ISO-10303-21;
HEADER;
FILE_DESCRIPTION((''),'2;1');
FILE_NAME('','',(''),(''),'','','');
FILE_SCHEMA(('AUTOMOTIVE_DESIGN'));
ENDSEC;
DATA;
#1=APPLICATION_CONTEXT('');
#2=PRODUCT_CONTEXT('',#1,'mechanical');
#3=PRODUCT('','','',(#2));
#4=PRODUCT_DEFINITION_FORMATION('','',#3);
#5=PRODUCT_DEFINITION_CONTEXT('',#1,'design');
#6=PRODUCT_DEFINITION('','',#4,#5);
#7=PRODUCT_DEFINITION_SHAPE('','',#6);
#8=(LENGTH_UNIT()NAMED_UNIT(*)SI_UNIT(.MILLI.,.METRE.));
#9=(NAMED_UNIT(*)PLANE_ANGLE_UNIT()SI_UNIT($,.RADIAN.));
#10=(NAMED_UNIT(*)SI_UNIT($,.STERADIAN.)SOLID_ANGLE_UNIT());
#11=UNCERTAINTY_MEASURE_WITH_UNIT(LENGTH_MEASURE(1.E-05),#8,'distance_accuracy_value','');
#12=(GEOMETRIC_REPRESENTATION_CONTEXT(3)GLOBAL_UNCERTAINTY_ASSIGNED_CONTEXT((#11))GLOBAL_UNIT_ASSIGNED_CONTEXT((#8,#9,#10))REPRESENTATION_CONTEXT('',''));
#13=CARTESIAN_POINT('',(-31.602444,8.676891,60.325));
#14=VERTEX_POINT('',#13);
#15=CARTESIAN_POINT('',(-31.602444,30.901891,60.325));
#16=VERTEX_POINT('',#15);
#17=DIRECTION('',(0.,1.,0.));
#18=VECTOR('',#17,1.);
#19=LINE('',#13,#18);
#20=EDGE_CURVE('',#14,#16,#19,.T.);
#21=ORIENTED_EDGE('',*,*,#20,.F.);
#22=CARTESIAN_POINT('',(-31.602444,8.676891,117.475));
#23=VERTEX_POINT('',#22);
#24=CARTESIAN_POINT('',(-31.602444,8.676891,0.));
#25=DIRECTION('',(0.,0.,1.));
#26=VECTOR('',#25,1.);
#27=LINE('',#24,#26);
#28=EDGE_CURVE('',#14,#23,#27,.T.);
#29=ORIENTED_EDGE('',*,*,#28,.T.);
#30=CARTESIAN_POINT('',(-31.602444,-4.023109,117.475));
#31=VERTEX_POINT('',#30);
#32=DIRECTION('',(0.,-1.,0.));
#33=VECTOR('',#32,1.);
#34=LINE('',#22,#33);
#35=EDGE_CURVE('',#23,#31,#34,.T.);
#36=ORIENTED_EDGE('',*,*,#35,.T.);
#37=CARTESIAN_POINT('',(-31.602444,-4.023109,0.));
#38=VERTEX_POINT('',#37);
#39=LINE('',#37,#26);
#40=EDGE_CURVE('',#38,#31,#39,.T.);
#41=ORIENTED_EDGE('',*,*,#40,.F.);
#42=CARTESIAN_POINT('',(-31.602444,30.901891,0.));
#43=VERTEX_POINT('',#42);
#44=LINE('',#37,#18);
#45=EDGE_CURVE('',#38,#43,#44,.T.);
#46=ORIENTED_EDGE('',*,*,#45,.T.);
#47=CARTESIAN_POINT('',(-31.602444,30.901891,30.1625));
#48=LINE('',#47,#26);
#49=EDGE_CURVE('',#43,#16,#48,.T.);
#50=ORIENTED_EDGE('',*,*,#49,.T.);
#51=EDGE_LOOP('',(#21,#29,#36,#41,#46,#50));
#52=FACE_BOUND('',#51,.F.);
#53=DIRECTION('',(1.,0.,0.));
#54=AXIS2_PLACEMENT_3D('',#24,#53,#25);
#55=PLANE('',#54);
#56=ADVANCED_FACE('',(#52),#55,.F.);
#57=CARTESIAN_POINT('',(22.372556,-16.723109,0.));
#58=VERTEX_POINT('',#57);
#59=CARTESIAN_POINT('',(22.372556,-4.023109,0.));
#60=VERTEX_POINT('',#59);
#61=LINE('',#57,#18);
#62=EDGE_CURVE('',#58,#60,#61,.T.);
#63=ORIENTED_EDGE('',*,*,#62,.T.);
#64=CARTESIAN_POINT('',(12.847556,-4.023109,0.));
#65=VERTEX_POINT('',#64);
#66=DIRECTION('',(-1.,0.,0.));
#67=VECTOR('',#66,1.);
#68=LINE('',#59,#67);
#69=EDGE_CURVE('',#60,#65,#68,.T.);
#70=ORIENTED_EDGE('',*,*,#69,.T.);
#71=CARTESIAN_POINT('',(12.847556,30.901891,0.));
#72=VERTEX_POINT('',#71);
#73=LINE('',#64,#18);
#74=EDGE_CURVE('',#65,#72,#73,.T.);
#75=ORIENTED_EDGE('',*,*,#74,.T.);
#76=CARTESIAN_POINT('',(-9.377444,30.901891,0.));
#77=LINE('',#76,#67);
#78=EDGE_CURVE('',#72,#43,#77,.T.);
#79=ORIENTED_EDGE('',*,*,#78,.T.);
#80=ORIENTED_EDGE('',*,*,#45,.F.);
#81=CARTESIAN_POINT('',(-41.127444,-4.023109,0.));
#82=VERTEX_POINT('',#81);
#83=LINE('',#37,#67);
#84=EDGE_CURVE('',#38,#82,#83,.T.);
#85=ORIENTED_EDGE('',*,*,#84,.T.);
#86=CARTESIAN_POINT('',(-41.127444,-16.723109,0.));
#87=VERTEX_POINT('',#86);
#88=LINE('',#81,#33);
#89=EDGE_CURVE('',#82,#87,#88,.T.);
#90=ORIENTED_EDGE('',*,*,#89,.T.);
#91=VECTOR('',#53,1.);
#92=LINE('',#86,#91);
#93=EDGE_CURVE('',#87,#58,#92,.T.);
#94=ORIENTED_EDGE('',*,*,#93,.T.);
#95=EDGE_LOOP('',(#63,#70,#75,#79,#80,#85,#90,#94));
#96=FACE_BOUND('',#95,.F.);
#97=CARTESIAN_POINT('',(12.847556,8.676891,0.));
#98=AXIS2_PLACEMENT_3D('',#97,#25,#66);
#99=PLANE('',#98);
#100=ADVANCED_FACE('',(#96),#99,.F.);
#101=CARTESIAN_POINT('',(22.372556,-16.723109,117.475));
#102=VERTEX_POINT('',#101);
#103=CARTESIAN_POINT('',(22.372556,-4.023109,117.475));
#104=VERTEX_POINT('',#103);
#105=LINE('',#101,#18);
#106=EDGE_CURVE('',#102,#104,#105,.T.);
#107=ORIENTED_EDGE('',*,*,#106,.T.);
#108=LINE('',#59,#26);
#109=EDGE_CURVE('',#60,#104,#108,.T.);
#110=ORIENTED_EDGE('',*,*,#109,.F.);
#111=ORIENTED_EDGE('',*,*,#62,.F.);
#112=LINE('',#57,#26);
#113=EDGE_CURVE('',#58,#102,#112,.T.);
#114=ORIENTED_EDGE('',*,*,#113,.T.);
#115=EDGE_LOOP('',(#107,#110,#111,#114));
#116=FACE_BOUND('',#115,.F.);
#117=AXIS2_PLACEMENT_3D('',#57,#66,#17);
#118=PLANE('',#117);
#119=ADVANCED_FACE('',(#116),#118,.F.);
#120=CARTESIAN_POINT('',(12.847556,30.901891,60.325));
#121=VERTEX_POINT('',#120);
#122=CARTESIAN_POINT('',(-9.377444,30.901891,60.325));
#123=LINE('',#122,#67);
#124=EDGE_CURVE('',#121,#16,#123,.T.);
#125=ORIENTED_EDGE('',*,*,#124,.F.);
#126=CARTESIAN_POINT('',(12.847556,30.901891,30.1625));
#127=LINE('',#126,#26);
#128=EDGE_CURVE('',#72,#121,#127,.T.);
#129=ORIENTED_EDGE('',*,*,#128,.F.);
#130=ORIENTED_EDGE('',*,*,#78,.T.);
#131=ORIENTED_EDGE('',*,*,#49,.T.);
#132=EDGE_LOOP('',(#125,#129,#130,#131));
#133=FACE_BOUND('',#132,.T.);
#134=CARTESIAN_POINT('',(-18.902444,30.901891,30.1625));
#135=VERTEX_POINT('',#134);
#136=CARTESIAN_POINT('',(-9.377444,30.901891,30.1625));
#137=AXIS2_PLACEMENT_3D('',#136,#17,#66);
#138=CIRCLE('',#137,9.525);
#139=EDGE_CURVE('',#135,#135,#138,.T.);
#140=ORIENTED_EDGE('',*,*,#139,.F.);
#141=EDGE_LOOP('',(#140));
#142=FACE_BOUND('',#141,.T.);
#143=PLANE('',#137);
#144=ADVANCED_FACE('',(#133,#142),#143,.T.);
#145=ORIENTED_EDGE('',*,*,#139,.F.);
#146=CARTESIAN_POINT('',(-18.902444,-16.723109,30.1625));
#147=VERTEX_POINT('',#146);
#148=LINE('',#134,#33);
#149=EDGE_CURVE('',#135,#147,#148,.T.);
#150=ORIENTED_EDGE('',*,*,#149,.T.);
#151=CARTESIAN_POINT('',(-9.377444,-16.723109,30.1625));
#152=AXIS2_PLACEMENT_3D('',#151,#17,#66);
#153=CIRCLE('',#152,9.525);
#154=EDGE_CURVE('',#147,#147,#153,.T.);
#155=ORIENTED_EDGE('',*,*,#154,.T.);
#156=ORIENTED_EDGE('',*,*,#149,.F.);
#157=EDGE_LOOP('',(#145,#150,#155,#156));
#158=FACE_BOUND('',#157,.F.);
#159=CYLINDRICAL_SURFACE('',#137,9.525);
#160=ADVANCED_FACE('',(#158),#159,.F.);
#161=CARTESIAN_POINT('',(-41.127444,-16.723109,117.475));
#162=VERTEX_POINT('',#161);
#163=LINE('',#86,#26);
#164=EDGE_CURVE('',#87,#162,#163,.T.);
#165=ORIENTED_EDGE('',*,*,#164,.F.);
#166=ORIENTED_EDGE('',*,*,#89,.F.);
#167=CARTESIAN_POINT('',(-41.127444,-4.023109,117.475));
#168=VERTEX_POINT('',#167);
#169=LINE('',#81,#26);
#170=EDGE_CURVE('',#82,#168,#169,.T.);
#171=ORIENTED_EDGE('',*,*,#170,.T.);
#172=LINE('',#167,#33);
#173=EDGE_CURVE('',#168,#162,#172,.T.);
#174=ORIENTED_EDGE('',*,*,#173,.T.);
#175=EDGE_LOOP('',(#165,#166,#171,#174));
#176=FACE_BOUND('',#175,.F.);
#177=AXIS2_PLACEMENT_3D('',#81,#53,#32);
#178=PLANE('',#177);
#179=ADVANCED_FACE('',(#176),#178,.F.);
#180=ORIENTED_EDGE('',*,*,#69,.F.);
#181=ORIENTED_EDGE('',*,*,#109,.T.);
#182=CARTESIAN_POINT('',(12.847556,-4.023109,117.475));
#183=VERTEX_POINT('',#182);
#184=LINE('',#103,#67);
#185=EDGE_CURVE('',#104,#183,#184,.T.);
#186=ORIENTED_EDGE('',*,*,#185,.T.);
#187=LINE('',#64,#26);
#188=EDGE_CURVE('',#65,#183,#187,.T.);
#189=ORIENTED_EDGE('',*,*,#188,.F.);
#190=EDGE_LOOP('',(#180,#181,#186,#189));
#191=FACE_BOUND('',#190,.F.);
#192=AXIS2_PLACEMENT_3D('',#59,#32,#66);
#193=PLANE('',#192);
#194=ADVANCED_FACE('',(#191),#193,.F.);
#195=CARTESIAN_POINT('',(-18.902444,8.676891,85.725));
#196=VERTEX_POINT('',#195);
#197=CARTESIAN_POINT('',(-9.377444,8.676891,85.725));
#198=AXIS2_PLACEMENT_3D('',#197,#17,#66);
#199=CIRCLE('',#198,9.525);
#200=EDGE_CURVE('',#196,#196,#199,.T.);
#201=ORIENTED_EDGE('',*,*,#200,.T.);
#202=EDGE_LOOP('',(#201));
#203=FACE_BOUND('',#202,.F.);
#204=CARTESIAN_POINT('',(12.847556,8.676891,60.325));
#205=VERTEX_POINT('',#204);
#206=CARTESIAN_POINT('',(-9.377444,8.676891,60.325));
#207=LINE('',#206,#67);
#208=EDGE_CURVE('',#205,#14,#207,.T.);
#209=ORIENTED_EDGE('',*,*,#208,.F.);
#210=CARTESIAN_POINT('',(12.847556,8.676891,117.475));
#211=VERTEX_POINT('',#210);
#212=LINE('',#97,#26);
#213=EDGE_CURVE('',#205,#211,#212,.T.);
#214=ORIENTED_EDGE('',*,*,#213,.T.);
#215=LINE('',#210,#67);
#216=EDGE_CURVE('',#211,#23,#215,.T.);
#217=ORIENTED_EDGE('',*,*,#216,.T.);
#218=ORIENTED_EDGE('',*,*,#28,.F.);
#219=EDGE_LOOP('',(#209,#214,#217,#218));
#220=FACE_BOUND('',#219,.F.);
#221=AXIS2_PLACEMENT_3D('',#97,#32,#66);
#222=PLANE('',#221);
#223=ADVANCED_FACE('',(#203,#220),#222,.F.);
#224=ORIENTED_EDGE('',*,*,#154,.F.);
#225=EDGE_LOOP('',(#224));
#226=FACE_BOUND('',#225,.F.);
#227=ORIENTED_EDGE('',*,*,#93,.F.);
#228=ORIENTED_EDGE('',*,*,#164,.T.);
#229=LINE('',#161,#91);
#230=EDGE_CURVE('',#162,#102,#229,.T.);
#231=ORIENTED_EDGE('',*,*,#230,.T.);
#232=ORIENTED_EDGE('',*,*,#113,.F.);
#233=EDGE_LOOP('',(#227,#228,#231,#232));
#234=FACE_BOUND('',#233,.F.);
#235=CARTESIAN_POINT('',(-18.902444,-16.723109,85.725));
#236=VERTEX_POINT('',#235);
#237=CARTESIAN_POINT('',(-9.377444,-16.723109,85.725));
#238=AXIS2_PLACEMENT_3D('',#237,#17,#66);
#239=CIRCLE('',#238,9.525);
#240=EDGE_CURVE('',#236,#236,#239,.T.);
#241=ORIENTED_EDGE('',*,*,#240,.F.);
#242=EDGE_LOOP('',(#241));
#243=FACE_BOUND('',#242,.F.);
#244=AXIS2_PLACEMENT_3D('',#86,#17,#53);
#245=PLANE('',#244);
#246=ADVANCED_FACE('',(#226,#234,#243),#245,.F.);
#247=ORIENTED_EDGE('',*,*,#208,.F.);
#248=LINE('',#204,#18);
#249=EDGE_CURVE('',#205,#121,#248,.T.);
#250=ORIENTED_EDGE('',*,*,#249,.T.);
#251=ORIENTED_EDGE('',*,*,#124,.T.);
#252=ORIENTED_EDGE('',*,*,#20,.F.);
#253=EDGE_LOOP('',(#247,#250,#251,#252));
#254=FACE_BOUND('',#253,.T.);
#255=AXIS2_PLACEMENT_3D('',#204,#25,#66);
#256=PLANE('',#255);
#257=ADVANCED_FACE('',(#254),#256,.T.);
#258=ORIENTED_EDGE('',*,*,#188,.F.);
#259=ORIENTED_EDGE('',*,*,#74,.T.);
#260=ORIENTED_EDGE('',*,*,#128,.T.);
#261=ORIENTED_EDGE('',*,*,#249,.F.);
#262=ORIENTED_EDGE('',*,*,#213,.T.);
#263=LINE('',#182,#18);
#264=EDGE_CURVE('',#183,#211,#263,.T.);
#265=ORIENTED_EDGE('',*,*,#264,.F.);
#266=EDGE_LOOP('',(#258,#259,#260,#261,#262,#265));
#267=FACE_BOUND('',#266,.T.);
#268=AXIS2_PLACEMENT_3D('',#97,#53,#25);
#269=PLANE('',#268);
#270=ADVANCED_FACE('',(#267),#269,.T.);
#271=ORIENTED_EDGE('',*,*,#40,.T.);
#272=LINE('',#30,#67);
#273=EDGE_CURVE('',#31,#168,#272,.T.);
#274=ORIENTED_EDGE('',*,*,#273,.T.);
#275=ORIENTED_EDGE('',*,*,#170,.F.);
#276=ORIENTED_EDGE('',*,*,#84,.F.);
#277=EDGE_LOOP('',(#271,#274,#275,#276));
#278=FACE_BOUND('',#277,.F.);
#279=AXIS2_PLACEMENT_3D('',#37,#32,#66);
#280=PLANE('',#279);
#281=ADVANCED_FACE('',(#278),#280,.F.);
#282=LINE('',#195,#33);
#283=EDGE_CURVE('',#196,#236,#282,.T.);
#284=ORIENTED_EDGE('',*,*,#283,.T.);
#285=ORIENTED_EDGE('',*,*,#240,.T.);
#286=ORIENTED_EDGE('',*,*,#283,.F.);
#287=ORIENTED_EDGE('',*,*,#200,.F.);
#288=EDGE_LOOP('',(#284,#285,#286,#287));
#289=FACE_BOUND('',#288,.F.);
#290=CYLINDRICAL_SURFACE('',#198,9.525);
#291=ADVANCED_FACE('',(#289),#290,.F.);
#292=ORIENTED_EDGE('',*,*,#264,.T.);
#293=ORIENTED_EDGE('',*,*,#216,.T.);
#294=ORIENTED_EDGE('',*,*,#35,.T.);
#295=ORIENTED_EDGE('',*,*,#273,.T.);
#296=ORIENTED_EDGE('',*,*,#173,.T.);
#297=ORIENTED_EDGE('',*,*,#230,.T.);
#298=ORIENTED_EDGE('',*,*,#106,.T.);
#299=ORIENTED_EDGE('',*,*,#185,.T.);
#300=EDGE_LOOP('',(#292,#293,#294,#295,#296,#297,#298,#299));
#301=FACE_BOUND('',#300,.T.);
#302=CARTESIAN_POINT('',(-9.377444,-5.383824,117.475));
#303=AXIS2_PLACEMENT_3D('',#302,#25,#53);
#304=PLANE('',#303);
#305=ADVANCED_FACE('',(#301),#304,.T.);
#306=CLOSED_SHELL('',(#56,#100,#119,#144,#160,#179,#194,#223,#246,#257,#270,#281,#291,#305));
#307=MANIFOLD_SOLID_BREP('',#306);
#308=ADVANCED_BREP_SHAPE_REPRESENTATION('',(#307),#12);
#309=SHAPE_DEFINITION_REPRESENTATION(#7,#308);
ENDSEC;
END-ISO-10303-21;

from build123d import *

# Parameters (mm, degrees)
F1_DEPTH = 117.475
F2_W     = 44.45
F2_H     = 60.325
F3_DEPTH = 22.225
F4_R     = 9.525
F5_DEPTH = 25.401
F6_R     = 9.525
F7_DEPTH = 47.626


with BuildPart() as f1:
    # F0 (on Top) → F1 (new body)
    with BuildSketch(Plane.XY):
        Polygon((-41.127444163, -4.0231094092), (-41.127444163, -16.7231094092), (22.372555837, -16.7231094092), (22.372555837, -4.0231094092), (12.847555837, -4.0231094092), (12.847555837, 8.6768905908), (-31.602444163, 8.6768905908), (-31.602444163, -4.0231094092), align=None)
    extrude(amount=F1_DEPTH)

    # F2 (on face) → F3 (join)
    with BuildSketch(Plane(origin=(0, 8.6768905908, 0), x_dir=(-1, 0, 0), z_dir=(0, 1, 0))):
        with Locations((9.377444163, 30.1625)):
            Rectangle(F2_W, F2_H)
    extrude(amount=F3_DEPTH)

    # F4 (on face) → F5 (cut, through all)
    with BuildSketch(Plane(origin=(0, 8.6768905908, 0), x_dir=(-1, 0, 0), z_dir=(0, 1, 0))):
        with Locations((9.377444163, 85.725)):
            Circle(F4_R)
    extrude(amount=-F5_DEPTH, mode=Mode.SUBTRACT)

    # F6 (on face) → F7 (cut, through all)
    with BuildSketch(Plane(origin=(0, 30.9018905908, 0), x_dir=(-1, 0, 0), z_dir=(0, 1, 0))):
        with Locations((9.377444163, 30.1625)):
            Circle(F6_R)
    extrude(amount=-F7_DEPTH, mode=Mode.SUBTRACT)


solid = f1.part
